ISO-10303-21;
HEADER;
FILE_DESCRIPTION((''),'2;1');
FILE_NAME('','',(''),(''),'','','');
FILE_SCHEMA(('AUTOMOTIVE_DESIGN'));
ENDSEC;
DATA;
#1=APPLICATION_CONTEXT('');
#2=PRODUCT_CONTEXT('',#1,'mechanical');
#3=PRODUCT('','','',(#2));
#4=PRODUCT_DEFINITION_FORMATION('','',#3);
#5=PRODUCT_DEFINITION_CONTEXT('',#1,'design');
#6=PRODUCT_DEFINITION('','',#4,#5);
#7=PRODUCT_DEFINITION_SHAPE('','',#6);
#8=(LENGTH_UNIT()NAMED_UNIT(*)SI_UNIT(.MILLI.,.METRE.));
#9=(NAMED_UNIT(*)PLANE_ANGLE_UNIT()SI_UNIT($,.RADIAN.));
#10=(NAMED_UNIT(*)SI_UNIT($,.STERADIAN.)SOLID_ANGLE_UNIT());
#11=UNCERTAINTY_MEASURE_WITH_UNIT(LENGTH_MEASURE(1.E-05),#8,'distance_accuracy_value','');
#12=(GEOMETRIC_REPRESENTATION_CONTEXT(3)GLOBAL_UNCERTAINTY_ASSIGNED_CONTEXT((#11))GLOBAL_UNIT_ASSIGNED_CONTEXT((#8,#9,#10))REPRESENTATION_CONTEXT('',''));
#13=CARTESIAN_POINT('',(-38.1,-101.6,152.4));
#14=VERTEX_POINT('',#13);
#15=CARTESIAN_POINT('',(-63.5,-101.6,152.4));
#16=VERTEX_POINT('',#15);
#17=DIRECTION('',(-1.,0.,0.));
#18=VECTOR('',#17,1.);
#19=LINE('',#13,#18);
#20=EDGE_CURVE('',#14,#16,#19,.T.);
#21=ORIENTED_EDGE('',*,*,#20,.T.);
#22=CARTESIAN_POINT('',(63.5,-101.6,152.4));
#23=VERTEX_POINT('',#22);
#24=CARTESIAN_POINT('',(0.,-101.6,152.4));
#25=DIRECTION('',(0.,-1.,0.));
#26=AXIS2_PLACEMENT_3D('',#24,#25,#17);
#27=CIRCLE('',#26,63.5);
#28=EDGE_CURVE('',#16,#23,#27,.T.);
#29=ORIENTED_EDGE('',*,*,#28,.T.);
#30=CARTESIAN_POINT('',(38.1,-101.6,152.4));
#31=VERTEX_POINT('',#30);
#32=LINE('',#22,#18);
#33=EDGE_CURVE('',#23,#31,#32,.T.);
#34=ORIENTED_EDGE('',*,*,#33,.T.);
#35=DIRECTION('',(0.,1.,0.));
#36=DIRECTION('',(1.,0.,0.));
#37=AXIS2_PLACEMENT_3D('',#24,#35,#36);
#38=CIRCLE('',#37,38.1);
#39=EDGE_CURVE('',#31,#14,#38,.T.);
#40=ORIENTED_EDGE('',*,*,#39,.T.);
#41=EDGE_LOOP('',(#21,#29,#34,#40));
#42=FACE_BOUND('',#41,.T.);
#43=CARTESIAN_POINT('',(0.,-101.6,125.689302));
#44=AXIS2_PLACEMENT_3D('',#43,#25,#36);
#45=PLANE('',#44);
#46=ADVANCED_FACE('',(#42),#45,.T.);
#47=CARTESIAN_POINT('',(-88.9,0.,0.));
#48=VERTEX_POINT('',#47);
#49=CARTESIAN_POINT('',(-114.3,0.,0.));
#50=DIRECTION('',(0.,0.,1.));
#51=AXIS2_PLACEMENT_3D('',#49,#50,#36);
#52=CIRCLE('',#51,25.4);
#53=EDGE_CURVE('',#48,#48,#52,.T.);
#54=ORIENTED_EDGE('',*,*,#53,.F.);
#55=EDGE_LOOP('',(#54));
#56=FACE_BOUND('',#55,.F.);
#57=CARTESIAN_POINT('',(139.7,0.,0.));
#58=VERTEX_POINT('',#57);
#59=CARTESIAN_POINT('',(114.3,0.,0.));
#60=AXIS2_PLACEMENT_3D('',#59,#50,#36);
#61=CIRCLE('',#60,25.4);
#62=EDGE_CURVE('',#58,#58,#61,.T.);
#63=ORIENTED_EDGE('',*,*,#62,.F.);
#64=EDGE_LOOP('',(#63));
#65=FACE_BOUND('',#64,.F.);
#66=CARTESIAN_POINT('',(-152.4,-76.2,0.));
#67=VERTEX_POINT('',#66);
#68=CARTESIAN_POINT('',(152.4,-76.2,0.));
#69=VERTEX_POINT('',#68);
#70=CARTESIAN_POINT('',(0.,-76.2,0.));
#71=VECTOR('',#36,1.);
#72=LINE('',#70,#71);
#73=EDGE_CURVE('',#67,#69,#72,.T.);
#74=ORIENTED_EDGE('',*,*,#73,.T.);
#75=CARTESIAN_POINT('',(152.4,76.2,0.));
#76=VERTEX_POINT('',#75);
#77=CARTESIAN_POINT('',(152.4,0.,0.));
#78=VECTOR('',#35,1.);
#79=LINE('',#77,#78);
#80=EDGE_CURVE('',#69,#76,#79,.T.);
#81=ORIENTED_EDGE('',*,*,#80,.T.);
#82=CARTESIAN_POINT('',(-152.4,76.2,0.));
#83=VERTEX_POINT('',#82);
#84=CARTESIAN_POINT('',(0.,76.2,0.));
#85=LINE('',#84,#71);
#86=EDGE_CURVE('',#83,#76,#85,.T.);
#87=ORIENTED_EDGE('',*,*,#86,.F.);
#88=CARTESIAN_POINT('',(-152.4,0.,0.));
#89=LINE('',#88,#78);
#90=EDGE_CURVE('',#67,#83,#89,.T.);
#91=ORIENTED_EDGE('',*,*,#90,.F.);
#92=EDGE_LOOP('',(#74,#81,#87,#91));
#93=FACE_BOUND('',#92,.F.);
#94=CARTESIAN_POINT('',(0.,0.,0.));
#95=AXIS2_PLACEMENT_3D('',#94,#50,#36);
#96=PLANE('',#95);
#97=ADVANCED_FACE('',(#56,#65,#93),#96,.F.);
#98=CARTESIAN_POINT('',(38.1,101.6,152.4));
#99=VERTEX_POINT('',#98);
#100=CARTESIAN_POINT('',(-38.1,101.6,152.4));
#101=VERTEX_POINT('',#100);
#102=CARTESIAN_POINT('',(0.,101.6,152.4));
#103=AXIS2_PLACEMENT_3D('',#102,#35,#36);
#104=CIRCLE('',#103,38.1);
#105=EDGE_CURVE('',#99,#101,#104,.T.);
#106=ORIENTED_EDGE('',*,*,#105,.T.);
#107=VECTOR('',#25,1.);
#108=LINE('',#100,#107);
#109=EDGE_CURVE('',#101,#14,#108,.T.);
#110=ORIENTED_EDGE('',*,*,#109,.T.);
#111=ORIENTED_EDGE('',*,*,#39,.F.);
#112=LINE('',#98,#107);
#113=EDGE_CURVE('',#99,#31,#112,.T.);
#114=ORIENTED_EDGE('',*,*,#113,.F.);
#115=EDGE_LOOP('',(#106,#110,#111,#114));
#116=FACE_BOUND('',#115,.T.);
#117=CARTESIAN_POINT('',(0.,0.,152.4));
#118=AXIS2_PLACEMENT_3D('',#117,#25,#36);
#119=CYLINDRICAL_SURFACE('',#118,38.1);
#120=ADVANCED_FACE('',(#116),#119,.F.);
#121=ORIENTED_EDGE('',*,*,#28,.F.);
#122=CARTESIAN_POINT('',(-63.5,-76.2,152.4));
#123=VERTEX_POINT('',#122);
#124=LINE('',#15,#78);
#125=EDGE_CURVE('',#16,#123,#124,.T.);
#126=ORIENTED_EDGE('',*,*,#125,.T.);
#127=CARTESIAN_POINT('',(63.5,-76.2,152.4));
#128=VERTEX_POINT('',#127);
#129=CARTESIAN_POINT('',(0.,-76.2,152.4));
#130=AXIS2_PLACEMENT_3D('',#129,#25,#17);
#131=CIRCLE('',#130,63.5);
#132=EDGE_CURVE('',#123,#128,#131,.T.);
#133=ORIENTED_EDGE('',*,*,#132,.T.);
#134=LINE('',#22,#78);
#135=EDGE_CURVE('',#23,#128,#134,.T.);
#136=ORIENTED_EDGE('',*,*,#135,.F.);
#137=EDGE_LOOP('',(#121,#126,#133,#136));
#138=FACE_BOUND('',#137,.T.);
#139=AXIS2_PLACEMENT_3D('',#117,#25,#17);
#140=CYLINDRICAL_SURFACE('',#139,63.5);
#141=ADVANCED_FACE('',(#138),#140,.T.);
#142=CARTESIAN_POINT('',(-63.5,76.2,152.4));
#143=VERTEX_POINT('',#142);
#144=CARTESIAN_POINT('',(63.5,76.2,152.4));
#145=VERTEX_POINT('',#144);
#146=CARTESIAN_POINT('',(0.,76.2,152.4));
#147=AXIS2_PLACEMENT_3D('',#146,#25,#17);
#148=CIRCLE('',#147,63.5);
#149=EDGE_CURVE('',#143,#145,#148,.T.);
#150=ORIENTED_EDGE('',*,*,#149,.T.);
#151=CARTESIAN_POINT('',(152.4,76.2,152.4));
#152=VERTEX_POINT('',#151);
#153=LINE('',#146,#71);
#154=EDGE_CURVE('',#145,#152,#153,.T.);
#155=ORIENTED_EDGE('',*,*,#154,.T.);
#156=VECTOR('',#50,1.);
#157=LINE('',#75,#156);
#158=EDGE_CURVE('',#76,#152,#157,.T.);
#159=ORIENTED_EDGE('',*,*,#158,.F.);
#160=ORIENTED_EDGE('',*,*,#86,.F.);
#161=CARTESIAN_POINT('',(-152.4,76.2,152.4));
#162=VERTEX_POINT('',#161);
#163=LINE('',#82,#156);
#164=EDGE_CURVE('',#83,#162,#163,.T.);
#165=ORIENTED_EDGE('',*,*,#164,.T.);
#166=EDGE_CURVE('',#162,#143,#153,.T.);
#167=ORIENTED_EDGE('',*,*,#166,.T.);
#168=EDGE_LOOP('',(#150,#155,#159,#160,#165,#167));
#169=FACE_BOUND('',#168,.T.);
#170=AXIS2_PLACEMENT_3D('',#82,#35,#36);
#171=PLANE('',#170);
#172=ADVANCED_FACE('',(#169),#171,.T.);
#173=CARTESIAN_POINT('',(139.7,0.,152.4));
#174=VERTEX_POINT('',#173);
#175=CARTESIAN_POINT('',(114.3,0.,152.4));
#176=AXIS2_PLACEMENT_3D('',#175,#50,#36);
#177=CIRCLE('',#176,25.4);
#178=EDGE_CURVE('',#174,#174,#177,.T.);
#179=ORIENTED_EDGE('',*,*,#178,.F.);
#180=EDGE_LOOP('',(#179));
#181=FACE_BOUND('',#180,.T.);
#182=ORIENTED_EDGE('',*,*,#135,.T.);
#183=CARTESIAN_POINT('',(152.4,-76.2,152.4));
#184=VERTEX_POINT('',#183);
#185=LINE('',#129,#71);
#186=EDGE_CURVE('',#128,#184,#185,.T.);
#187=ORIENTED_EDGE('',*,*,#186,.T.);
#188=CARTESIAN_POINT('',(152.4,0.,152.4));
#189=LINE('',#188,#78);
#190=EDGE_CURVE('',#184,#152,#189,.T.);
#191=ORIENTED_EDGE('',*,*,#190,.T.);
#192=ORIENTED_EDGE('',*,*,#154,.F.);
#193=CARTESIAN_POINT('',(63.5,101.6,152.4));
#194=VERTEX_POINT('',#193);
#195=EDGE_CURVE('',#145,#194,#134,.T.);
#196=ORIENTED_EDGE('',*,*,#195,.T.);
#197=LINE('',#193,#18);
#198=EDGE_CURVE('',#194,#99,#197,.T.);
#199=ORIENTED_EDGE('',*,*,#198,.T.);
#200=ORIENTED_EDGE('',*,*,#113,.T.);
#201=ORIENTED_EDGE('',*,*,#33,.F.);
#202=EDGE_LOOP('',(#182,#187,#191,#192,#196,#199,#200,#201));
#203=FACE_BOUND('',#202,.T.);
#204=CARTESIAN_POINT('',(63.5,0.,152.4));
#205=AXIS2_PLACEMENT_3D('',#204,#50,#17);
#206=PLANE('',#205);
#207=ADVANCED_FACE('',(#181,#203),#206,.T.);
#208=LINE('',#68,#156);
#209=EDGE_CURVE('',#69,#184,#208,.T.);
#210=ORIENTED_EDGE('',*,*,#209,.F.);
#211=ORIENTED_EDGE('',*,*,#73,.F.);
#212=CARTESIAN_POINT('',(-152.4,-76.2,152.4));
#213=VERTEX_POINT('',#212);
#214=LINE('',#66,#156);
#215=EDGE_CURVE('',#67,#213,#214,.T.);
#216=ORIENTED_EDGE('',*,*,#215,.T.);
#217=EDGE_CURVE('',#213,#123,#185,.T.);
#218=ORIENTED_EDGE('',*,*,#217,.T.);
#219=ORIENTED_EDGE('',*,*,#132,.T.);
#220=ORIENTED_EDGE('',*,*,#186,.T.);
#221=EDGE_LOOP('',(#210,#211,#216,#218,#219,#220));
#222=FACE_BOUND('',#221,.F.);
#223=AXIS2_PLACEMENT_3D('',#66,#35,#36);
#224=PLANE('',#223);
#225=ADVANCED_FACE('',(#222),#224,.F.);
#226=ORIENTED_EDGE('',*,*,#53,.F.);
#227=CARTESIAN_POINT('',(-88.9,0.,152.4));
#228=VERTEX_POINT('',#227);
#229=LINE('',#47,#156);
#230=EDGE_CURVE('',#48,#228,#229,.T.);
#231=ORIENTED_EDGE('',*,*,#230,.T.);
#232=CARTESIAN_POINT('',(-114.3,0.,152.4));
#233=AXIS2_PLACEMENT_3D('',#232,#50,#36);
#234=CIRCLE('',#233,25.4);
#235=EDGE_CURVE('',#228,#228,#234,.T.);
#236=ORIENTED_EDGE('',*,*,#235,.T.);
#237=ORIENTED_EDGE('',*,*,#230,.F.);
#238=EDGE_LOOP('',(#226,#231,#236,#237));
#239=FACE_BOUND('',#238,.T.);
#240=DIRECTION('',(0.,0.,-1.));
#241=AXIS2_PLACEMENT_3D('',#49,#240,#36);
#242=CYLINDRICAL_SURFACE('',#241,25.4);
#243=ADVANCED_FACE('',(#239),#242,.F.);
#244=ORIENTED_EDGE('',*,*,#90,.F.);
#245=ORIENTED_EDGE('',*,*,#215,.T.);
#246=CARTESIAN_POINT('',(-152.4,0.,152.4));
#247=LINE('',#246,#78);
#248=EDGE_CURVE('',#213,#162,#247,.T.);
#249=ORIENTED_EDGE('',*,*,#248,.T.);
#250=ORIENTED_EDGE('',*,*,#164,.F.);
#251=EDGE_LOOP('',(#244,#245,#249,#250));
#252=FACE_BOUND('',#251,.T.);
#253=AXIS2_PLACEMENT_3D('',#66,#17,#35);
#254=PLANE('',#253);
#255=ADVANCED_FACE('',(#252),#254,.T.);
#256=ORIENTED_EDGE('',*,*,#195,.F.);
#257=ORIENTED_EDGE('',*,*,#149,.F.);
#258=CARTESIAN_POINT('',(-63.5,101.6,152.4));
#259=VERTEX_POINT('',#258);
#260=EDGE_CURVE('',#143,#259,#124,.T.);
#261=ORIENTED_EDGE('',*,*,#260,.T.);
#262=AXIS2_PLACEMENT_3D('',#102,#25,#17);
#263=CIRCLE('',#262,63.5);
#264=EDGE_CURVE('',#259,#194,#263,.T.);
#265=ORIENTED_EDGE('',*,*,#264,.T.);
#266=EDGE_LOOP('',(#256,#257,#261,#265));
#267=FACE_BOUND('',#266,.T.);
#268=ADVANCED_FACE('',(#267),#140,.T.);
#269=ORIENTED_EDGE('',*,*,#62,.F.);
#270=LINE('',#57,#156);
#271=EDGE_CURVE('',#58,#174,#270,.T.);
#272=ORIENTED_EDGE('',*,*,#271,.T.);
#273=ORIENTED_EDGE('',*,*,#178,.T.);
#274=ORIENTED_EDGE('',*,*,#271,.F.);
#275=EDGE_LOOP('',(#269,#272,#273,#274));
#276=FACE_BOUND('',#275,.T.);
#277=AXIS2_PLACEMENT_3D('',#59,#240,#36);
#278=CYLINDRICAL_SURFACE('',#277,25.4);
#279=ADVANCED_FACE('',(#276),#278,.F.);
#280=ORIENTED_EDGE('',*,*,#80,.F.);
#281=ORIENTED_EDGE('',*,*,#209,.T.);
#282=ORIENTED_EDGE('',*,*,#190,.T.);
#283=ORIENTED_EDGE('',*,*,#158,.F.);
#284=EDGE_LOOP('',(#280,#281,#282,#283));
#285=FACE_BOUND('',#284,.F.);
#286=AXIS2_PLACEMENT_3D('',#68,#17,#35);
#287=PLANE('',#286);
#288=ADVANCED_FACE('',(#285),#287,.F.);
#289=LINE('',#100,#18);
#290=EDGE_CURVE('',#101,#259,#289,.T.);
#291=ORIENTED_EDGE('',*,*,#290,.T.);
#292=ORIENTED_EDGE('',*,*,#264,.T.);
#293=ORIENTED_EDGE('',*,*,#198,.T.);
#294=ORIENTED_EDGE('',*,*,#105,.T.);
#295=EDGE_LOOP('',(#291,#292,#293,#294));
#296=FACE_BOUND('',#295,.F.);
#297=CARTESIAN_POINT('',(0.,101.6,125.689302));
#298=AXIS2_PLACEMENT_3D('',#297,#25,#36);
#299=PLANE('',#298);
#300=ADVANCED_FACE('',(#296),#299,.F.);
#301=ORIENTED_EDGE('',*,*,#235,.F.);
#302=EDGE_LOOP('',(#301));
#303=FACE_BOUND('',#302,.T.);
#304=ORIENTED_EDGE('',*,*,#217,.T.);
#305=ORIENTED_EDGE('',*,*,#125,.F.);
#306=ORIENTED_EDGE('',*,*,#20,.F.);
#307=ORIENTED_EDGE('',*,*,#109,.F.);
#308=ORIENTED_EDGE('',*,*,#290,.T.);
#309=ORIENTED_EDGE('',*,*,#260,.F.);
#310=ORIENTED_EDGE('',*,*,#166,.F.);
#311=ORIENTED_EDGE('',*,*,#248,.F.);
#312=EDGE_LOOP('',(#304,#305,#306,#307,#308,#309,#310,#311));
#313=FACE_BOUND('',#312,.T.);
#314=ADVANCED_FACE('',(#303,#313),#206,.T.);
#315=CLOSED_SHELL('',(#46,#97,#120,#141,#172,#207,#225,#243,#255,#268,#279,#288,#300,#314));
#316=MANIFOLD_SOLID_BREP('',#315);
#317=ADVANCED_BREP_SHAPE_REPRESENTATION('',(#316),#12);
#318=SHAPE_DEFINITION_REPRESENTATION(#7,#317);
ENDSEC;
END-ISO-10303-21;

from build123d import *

# Parameters (mm, degrees)
F0_W     = 304.8
F0_H     = 152.4
F0_R     = 25.4
F1_DEPTH = 152.4
F3_DEPTH = 101.6
F4_DEPTH = 177.801


with BuildPart() as f1:
    # F0 (on Top) → F1 (new body)
    with BuildSketch(Plane.XY):
        Rectangle(F0_W, F0_H)
        with Locations((-114.3, 0)):
            Circle(F0_R, mode=Mode.SUBTRACT)
        with Locations((114.3, 0)):
            Circle(F0_R, mode=Mode.SUBTRACT)
    extrude(amount=F1_DEPTH)

    # F2 (on Front) → F3 (join, symmetric)
    with BuildSketch(Plane.XZ):
        with BuildLine():
            Line((63.5, 152.4), (38.1, 152.4))
            ThreePointArc((38.1, 152.4), (0, 114.3), (-38.1, 152.4))
            Line((-38.1, 152.4), (-63.5, 152.4))
            ThreePointArc((-63.5, 152.4), (0, 88.9), (63.5, 152.4))
        make_face()
    extrude(amount=F3_DEPTH, both=True)

    # F4 (cut, through all): a face of the model
    f4_faces = [f1.faces().sort_by_distance(p)[0] for p in [
        (0, -76.2, 136.2298577819),
    ]]
    extrude(f4_faces, amount=-F4_DEPTH, mode=Mode.SUBTRACT)


solid = f1.part
